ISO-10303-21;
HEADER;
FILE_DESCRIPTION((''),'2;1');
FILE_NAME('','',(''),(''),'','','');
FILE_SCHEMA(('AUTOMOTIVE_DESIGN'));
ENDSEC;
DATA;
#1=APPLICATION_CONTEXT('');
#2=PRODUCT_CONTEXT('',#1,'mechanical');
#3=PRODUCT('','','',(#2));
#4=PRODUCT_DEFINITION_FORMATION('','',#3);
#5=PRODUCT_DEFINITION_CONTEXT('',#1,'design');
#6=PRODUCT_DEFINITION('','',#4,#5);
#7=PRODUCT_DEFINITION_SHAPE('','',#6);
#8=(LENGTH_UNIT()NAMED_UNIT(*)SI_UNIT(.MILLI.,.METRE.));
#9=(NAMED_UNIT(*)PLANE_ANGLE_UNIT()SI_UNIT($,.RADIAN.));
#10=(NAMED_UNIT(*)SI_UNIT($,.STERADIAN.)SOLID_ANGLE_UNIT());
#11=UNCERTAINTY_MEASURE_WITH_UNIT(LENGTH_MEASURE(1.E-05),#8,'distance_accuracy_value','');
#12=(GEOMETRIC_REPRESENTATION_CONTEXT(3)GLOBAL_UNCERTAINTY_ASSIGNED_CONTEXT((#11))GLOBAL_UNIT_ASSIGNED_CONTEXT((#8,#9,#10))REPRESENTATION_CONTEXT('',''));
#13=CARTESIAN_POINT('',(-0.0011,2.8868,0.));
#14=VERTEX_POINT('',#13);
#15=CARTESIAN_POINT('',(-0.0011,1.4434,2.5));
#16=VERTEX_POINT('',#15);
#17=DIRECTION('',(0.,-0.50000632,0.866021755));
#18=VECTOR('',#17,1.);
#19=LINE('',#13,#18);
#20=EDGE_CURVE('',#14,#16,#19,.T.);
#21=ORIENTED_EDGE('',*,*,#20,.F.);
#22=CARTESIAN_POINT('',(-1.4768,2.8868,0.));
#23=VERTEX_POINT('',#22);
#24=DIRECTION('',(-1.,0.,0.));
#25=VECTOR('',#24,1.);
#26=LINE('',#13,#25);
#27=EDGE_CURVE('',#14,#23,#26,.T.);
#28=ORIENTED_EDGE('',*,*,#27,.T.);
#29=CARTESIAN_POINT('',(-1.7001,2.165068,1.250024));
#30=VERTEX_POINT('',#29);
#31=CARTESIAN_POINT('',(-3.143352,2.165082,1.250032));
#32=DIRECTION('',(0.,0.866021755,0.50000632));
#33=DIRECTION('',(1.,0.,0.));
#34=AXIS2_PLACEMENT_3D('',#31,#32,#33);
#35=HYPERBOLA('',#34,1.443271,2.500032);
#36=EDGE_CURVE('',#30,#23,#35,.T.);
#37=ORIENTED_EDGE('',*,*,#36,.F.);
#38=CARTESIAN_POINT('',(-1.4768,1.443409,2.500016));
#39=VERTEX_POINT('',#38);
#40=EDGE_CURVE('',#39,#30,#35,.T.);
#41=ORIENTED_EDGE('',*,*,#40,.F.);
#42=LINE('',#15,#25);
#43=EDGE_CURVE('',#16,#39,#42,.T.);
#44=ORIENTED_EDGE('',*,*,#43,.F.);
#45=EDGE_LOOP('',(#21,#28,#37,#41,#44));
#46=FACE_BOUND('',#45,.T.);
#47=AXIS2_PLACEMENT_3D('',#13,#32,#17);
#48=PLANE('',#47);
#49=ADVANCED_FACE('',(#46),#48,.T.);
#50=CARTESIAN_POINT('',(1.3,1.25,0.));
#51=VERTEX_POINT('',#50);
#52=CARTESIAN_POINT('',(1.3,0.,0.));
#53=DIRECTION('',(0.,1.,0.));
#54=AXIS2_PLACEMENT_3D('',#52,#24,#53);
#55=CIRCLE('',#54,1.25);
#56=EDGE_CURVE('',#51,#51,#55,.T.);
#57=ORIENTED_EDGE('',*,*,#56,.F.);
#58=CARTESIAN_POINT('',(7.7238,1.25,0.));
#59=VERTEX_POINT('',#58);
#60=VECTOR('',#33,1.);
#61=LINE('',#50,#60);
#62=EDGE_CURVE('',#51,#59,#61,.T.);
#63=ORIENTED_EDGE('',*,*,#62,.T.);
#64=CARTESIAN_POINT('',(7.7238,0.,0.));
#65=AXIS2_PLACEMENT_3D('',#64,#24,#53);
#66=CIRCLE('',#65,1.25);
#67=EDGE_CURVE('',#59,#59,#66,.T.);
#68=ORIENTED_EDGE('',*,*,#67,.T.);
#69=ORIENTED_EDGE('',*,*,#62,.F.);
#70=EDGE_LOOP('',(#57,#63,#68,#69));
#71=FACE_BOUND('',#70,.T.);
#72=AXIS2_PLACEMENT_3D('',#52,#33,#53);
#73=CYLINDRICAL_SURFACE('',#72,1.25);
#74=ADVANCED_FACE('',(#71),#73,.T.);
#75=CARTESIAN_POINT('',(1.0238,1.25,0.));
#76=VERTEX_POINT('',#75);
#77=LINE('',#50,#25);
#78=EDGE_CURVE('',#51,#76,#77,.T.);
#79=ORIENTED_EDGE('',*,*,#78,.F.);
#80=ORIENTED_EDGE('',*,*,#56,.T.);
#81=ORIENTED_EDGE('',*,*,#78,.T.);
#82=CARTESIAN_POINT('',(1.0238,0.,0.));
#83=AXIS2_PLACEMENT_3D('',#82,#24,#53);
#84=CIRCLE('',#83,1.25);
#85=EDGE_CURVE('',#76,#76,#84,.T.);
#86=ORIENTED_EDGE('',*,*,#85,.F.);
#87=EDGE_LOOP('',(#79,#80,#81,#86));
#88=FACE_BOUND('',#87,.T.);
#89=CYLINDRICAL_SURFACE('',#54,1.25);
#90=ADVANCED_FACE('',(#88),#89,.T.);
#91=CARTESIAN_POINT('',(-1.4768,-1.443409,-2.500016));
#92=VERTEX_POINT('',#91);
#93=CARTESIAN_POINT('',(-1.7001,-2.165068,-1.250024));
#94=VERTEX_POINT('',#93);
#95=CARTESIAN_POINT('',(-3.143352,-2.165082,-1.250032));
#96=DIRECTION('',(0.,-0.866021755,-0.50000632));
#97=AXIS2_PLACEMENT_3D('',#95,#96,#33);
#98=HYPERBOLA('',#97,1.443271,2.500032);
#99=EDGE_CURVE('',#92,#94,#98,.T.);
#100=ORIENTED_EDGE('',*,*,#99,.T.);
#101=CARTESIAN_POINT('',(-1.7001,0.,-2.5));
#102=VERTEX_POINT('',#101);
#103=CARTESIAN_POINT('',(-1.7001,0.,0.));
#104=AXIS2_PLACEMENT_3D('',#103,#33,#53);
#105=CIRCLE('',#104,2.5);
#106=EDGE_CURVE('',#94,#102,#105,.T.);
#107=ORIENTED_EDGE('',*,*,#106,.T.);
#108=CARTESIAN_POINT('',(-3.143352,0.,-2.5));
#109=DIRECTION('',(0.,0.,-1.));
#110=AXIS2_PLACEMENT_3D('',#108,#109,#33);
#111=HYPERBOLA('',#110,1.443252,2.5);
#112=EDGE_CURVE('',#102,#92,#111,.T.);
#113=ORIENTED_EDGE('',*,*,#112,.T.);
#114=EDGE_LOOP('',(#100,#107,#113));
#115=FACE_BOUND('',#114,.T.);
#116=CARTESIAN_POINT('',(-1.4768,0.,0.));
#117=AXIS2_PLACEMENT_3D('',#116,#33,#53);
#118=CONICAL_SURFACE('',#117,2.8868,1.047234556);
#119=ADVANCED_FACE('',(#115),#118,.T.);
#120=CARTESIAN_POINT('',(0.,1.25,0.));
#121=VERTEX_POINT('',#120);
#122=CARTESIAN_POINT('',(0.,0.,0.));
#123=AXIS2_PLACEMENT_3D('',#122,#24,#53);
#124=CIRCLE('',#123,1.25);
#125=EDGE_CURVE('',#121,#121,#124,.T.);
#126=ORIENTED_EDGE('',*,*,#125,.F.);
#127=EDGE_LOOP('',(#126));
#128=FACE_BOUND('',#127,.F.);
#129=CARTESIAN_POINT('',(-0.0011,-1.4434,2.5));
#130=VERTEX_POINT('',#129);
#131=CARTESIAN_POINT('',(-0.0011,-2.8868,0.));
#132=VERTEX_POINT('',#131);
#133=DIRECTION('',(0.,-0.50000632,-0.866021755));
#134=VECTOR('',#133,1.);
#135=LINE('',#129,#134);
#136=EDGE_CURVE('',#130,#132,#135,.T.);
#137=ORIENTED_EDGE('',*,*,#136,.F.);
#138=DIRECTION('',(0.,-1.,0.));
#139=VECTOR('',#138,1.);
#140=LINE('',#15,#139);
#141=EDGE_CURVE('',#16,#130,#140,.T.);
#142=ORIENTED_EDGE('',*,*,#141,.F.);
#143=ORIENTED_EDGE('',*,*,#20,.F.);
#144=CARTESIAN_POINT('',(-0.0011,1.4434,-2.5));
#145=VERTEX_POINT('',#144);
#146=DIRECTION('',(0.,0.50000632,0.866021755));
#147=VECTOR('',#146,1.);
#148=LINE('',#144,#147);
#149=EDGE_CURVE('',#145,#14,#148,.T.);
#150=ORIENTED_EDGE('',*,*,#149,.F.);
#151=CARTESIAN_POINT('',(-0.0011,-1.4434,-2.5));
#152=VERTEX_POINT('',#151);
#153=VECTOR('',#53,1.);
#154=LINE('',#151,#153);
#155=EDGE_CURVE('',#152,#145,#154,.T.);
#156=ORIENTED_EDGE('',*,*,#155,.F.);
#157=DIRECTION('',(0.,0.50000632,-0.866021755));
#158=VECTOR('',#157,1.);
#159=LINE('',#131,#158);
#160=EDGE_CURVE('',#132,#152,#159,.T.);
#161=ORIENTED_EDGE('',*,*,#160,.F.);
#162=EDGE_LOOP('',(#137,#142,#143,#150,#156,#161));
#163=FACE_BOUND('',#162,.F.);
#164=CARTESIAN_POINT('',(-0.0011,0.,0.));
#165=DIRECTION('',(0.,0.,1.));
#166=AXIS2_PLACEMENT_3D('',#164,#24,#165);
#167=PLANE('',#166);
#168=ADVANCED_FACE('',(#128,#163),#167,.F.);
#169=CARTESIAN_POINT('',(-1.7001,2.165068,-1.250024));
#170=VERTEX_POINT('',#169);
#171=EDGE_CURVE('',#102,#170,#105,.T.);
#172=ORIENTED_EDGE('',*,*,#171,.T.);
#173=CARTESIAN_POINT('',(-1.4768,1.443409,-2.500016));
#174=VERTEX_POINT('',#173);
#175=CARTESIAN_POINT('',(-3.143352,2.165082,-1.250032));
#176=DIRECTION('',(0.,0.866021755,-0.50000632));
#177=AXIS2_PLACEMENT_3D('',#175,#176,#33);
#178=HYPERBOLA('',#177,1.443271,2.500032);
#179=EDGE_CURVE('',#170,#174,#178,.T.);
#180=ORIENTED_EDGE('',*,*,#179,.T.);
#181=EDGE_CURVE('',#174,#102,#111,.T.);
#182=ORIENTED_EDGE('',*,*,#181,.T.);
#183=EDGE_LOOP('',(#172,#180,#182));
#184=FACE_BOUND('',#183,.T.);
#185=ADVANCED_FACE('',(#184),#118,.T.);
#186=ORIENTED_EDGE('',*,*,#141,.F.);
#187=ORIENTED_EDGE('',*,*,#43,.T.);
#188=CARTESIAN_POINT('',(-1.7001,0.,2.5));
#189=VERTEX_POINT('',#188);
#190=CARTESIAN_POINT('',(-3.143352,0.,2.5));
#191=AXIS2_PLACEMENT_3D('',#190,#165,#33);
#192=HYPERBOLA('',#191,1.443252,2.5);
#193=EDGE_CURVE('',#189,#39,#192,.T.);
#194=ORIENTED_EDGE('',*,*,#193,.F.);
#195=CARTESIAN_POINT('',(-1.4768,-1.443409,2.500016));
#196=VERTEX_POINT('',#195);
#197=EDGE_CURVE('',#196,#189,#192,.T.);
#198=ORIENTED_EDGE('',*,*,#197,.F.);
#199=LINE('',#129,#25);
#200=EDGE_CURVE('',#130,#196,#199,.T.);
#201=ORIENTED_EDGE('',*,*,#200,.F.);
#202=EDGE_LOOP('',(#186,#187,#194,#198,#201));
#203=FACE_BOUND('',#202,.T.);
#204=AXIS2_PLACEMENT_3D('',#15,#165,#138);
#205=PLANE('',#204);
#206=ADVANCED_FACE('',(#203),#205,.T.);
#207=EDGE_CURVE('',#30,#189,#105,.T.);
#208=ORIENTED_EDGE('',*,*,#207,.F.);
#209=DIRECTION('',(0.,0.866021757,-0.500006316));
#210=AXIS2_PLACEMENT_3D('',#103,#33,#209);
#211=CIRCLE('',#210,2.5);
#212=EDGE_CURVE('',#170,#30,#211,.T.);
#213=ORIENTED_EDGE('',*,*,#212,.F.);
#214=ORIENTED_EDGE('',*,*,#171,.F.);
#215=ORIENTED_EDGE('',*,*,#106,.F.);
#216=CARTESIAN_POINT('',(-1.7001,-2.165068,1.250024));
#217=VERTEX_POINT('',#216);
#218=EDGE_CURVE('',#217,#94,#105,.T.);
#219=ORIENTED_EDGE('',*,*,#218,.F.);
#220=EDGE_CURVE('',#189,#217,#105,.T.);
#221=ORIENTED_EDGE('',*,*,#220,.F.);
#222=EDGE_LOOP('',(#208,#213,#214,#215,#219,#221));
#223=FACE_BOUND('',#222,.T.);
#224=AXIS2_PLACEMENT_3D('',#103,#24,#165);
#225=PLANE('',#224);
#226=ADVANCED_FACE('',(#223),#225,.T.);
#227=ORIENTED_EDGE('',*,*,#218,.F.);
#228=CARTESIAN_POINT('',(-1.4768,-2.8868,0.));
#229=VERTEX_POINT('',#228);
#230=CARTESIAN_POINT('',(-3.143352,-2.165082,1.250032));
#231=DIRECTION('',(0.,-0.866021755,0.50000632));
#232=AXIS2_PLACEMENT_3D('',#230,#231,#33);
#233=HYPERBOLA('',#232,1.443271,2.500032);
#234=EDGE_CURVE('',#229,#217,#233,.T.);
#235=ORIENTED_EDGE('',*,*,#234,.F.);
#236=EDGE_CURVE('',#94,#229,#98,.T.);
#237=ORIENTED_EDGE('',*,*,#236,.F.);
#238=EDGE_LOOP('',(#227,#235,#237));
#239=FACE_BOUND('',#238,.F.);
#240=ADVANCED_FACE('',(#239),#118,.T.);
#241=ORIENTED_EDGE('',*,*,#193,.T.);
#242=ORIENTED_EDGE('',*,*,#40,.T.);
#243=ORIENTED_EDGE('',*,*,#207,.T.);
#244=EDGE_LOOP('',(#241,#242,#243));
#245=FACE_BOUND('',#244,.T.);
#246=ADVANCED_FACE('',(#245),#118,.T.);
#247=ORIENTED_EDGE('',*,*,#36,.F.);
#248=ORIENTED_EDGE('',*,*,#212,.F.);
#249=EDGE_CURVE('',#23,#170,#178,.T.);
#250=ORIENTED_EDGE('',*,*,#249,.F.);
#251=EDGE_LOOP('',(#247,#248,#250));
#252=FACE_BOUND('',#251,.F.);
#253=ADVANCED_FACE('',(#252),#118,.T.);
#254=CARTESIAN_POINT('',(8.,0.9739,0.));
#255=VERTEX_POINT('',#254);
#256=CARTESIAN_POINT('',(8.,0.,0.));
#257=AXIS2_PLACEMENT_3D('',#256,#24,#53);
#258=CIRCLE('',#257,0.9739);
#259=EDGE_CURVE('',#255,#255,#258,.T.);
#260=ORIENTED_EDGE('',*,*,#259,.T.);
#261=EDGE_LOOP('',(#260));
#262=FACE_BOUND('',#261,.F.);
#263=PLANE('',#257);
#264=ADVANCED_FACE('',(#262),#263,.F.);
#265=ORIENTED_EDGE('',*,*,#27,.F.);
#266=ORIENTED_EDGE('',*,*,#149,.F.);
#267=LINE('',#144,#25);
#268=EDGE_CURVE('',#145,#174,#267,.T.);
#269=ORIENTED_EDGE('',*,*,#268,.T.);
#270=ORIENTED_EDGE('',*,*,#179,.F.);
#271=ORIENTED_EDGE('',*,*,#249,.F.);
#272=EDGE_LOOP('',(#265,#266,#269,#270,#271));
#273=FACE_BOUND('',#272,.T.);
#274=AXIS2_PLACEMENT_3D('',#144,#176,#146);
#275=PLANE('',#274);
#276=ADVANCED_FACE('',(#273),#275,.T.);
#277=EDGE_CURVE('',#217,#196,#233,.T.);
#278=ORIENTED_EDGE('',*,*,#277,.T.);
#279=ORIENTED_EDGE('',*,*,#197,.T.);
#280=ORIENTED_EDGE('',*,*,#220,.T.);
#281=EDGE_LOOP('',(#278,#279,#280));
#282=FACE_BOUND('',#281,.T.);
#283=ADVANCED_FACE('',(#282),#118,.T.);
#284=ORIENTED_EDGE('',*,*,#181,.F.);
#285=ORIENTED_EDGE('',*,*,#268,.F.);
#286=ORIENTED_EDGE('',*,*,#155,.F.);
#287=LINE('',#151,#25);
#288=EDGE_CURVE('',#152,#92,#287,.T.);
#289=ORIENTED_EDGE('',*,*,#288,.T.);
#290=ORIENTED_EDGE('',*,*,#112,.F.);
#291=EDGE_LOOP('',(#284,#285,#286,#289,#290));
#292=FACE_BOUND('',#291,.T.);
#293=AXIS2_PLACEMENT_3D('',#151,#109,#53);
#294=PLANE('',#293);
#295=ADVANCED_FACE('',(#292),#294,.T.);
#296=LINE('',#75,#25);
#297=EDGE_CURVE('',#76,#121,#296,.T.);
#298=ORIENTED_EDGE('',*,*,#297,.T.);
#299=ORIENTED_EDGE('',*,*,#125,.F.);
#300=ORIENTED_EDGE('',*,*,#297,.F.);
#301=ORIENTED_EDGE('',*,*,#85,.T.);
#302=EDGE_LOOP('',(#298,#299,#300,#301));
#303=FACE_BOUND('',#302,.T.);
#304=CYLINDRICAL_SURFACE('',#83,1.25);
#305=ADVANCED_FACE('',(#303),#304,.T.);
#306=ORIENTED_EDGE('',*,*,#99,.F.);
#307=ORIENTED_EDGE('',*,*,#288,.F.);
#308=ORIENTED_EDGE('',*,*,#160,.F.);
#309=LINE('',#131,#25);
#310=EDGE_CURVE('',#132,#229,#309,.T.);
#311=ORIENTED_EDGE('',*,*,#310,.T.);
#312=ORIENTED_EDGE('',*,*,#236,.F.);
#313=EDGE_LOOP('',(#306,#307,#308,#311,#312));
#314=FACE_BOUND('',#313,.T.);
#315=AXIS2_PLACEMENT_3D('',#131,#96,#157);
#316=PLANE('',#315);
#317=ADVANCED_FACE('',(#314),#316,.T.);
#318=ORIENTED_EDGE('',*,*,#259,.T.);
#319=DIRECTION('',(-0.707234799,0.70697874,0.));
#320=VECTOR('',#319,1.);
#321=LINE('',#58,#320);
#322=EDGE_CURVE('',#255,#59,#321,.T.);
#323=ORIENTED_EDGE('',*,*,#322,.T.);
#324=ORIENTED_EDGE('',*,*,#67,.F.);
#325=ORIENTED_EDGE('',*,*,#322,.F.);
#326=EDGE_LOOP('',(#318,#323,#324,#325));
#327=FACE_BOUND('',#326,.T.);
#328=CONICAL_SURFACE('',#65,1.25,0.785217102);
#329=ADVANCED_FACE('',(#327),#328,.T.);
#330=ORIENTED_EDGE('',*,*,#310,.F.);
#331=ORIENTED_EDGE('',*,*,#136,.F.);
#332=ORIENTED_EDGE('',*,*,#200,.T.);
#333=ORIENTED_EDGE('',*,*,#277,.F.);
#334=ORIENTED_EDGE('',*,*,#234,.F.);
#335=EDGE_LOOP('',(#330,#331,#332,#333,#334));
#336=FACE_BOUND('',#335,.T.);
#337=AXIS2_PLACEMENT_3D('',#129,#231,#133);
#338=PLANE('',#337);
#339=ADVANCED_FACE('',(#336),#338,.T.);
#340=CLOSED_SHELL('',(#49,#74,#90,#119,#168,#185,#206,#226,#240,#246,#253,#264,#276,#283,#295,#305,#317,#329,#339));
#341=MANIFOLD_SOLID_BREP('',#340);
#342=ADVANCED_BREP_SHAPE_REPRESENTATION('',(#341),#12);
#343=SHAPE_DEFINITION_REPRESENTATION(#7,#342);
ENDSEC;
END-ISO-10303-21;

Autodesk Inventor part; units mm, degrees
ref_plane "YZ Plane" through (0, 0, 0) normal (1, 0, 0) x (0, 1, 0)
ref_plane "XZ Plane" through (0, 0, 0) normal (0, 1, 0) x (-1, 0, 0)
sketch "Sketch1" plane through (0, 0, 0) normal (0, 0, 1) x (1, 0, 0)
  line L0 (0, 2.5) -> (0, 1.25)
  line L1 (1.3, 1.25) -> (8, 1.25)
  line L2 (8, 1.25) -> (8, 0)
  line L3 (8, 0) -> (-0.0011, 0)
  line L4 (-1.6013, 0) -> (9.6002, 0) projected
  line L5 (-0.0011, 0) -> (-0.0011, 2.5)
  line L6 (-0.0011, 2.5) -> (0, 2.5)
  line L7 (1.3, 1.25) -> (1.0238, 1.25)
  line L8 (1.0238, 1.25) -> (0, 1.25)
  line L9 (0, -0.5) -> (0, 3) projected
  dimension "d0" = 8
  dimension "d1" = 6.7
  dimension "d2" = 2.5
  dimension "d9" = 0.0011
  dimension "d10" = 5
  dimension "d13" = 0.2762
  dimension "d14" = 2.5
revolve "Body" add sketch "Sketch1" angle 360 about axis through (8, 0, 0) along (-1, 0, 0)
sketch "Sketch2" plane through (-0.0011, 0, 0) normal (-1, 0, 0) x (0, 0, 1)
  line L0 (0, 2.8868) -> (2.5, 1.4434)
  line L1 (2.5, 1.4434) -> (2.5, -1.4434)
  line L2 (2.5, -1.4434) -> (0, -2.8868)
  line L3 (0, -2.8868) -> (-2.5, -1.4434)
  line L4 (-2.5, -1.4434) -> (-2.5, 1.4434)
  line L5 (-2.5, 1.4434) -> (0, 2.8868)
  point P0 (0, 0)
  point P1 (0, 0)
  dimension "d11" = 5
extrude "Head" add sketch "Sketch2" along normal blind 1.699
sketch "Sketch4" plane through (0, 0, 0) normal (0, 0, 1) x (1, 0, 0)
  line L0 (-1.7001, 2.5) -> (-1.7001, 2.8868)
  line L1 (-1.7001, 2.8868) -> (-1.4768, 2.8868)
  line L2 (-1.4768, 2.8868) -> (-1.7001, 2.5)
  line L3 (-2.0399, 0) -> (0.3387, 0) projected
  line L4 (-0.0011, 2.8868) -> (-1.7001, 2.8868) projected
  line L5 (-1.7001, 1.4434) -> (-1.7001, 2.8868) projected
  dimension "d5" = 30
  dimension "d19" = 5
revolve "Chamfer1" cut sketch "Sketch4" angle 360 about axis through (-10, 0, 0) along (1, 0, 0)
thread "Thread" size "M2.5x0.45" class "6g" standard "ISO Metric profile" length 6.7
chamfer "Chamfer2" distance 0.2761 distance2 0.2762 1 edges at (8, -1.25, 0) measured on face at (8, -0.2763, 0.017)
ref_plane "Work Plane1" through (1.525, 0, 0) normal (0, 0, 1) x (1, 0, 0)
equation "\"d0\" = NLG"
equation "\"d1\" = GEL"
equation "\"d2\" = GD"
equation "\"d10\" = SD2"
equation "\"d14\" = BDM"
equation "\"d11\" = SW"
equation "\"d3\" = KOH - SD"
equation "\"d5\" = ANG1"
equation "\"d19\" = SW0"
equation "\"d15\" = GEL"
equation "\"d6\" = -0.5 * SPD + 0.5 * GD"
equation "\"NLG\" = 8"
equation "\"GD\" = NND"
equation "\"BDM\" = NND"
equation "\"KOH\" = 1.7"
equation "\"GEL\" = 6.7"
equation "\"SW\" = 5"
equation "\"SW0\" = SW"
equation "\"SPD\" = NND - 1.2269 * PTC"
equation "\"SD2\" = SW"
equation "\"SD\" = 0.001"
equation "\"ANG1\" = 30deg"
equation "\"GAL\" = 0.61345 * PTC"
equation "\"GUL\" = 0.61345 * PTC"
equation "\"RR\" = 0.001"
equation "\"WFT\" = SD"
equation "\"GD1\" = THREADDIA - 1.2269 * PTC"
equation "\"THREADDIA\" = 2.5"
equation "\"SDH\" = SW"
equation "\"TOA\" = 30deg"
equation "\"FAWI\" = 45deg"
equation "\"PTC\" = 0.45"
equation "\"NND\" = 2.5"
equation "\"E0\" = 1.155 * SW"
properties part number "AS 1110 - M2,5 x 8" material "Steel, Mild"
